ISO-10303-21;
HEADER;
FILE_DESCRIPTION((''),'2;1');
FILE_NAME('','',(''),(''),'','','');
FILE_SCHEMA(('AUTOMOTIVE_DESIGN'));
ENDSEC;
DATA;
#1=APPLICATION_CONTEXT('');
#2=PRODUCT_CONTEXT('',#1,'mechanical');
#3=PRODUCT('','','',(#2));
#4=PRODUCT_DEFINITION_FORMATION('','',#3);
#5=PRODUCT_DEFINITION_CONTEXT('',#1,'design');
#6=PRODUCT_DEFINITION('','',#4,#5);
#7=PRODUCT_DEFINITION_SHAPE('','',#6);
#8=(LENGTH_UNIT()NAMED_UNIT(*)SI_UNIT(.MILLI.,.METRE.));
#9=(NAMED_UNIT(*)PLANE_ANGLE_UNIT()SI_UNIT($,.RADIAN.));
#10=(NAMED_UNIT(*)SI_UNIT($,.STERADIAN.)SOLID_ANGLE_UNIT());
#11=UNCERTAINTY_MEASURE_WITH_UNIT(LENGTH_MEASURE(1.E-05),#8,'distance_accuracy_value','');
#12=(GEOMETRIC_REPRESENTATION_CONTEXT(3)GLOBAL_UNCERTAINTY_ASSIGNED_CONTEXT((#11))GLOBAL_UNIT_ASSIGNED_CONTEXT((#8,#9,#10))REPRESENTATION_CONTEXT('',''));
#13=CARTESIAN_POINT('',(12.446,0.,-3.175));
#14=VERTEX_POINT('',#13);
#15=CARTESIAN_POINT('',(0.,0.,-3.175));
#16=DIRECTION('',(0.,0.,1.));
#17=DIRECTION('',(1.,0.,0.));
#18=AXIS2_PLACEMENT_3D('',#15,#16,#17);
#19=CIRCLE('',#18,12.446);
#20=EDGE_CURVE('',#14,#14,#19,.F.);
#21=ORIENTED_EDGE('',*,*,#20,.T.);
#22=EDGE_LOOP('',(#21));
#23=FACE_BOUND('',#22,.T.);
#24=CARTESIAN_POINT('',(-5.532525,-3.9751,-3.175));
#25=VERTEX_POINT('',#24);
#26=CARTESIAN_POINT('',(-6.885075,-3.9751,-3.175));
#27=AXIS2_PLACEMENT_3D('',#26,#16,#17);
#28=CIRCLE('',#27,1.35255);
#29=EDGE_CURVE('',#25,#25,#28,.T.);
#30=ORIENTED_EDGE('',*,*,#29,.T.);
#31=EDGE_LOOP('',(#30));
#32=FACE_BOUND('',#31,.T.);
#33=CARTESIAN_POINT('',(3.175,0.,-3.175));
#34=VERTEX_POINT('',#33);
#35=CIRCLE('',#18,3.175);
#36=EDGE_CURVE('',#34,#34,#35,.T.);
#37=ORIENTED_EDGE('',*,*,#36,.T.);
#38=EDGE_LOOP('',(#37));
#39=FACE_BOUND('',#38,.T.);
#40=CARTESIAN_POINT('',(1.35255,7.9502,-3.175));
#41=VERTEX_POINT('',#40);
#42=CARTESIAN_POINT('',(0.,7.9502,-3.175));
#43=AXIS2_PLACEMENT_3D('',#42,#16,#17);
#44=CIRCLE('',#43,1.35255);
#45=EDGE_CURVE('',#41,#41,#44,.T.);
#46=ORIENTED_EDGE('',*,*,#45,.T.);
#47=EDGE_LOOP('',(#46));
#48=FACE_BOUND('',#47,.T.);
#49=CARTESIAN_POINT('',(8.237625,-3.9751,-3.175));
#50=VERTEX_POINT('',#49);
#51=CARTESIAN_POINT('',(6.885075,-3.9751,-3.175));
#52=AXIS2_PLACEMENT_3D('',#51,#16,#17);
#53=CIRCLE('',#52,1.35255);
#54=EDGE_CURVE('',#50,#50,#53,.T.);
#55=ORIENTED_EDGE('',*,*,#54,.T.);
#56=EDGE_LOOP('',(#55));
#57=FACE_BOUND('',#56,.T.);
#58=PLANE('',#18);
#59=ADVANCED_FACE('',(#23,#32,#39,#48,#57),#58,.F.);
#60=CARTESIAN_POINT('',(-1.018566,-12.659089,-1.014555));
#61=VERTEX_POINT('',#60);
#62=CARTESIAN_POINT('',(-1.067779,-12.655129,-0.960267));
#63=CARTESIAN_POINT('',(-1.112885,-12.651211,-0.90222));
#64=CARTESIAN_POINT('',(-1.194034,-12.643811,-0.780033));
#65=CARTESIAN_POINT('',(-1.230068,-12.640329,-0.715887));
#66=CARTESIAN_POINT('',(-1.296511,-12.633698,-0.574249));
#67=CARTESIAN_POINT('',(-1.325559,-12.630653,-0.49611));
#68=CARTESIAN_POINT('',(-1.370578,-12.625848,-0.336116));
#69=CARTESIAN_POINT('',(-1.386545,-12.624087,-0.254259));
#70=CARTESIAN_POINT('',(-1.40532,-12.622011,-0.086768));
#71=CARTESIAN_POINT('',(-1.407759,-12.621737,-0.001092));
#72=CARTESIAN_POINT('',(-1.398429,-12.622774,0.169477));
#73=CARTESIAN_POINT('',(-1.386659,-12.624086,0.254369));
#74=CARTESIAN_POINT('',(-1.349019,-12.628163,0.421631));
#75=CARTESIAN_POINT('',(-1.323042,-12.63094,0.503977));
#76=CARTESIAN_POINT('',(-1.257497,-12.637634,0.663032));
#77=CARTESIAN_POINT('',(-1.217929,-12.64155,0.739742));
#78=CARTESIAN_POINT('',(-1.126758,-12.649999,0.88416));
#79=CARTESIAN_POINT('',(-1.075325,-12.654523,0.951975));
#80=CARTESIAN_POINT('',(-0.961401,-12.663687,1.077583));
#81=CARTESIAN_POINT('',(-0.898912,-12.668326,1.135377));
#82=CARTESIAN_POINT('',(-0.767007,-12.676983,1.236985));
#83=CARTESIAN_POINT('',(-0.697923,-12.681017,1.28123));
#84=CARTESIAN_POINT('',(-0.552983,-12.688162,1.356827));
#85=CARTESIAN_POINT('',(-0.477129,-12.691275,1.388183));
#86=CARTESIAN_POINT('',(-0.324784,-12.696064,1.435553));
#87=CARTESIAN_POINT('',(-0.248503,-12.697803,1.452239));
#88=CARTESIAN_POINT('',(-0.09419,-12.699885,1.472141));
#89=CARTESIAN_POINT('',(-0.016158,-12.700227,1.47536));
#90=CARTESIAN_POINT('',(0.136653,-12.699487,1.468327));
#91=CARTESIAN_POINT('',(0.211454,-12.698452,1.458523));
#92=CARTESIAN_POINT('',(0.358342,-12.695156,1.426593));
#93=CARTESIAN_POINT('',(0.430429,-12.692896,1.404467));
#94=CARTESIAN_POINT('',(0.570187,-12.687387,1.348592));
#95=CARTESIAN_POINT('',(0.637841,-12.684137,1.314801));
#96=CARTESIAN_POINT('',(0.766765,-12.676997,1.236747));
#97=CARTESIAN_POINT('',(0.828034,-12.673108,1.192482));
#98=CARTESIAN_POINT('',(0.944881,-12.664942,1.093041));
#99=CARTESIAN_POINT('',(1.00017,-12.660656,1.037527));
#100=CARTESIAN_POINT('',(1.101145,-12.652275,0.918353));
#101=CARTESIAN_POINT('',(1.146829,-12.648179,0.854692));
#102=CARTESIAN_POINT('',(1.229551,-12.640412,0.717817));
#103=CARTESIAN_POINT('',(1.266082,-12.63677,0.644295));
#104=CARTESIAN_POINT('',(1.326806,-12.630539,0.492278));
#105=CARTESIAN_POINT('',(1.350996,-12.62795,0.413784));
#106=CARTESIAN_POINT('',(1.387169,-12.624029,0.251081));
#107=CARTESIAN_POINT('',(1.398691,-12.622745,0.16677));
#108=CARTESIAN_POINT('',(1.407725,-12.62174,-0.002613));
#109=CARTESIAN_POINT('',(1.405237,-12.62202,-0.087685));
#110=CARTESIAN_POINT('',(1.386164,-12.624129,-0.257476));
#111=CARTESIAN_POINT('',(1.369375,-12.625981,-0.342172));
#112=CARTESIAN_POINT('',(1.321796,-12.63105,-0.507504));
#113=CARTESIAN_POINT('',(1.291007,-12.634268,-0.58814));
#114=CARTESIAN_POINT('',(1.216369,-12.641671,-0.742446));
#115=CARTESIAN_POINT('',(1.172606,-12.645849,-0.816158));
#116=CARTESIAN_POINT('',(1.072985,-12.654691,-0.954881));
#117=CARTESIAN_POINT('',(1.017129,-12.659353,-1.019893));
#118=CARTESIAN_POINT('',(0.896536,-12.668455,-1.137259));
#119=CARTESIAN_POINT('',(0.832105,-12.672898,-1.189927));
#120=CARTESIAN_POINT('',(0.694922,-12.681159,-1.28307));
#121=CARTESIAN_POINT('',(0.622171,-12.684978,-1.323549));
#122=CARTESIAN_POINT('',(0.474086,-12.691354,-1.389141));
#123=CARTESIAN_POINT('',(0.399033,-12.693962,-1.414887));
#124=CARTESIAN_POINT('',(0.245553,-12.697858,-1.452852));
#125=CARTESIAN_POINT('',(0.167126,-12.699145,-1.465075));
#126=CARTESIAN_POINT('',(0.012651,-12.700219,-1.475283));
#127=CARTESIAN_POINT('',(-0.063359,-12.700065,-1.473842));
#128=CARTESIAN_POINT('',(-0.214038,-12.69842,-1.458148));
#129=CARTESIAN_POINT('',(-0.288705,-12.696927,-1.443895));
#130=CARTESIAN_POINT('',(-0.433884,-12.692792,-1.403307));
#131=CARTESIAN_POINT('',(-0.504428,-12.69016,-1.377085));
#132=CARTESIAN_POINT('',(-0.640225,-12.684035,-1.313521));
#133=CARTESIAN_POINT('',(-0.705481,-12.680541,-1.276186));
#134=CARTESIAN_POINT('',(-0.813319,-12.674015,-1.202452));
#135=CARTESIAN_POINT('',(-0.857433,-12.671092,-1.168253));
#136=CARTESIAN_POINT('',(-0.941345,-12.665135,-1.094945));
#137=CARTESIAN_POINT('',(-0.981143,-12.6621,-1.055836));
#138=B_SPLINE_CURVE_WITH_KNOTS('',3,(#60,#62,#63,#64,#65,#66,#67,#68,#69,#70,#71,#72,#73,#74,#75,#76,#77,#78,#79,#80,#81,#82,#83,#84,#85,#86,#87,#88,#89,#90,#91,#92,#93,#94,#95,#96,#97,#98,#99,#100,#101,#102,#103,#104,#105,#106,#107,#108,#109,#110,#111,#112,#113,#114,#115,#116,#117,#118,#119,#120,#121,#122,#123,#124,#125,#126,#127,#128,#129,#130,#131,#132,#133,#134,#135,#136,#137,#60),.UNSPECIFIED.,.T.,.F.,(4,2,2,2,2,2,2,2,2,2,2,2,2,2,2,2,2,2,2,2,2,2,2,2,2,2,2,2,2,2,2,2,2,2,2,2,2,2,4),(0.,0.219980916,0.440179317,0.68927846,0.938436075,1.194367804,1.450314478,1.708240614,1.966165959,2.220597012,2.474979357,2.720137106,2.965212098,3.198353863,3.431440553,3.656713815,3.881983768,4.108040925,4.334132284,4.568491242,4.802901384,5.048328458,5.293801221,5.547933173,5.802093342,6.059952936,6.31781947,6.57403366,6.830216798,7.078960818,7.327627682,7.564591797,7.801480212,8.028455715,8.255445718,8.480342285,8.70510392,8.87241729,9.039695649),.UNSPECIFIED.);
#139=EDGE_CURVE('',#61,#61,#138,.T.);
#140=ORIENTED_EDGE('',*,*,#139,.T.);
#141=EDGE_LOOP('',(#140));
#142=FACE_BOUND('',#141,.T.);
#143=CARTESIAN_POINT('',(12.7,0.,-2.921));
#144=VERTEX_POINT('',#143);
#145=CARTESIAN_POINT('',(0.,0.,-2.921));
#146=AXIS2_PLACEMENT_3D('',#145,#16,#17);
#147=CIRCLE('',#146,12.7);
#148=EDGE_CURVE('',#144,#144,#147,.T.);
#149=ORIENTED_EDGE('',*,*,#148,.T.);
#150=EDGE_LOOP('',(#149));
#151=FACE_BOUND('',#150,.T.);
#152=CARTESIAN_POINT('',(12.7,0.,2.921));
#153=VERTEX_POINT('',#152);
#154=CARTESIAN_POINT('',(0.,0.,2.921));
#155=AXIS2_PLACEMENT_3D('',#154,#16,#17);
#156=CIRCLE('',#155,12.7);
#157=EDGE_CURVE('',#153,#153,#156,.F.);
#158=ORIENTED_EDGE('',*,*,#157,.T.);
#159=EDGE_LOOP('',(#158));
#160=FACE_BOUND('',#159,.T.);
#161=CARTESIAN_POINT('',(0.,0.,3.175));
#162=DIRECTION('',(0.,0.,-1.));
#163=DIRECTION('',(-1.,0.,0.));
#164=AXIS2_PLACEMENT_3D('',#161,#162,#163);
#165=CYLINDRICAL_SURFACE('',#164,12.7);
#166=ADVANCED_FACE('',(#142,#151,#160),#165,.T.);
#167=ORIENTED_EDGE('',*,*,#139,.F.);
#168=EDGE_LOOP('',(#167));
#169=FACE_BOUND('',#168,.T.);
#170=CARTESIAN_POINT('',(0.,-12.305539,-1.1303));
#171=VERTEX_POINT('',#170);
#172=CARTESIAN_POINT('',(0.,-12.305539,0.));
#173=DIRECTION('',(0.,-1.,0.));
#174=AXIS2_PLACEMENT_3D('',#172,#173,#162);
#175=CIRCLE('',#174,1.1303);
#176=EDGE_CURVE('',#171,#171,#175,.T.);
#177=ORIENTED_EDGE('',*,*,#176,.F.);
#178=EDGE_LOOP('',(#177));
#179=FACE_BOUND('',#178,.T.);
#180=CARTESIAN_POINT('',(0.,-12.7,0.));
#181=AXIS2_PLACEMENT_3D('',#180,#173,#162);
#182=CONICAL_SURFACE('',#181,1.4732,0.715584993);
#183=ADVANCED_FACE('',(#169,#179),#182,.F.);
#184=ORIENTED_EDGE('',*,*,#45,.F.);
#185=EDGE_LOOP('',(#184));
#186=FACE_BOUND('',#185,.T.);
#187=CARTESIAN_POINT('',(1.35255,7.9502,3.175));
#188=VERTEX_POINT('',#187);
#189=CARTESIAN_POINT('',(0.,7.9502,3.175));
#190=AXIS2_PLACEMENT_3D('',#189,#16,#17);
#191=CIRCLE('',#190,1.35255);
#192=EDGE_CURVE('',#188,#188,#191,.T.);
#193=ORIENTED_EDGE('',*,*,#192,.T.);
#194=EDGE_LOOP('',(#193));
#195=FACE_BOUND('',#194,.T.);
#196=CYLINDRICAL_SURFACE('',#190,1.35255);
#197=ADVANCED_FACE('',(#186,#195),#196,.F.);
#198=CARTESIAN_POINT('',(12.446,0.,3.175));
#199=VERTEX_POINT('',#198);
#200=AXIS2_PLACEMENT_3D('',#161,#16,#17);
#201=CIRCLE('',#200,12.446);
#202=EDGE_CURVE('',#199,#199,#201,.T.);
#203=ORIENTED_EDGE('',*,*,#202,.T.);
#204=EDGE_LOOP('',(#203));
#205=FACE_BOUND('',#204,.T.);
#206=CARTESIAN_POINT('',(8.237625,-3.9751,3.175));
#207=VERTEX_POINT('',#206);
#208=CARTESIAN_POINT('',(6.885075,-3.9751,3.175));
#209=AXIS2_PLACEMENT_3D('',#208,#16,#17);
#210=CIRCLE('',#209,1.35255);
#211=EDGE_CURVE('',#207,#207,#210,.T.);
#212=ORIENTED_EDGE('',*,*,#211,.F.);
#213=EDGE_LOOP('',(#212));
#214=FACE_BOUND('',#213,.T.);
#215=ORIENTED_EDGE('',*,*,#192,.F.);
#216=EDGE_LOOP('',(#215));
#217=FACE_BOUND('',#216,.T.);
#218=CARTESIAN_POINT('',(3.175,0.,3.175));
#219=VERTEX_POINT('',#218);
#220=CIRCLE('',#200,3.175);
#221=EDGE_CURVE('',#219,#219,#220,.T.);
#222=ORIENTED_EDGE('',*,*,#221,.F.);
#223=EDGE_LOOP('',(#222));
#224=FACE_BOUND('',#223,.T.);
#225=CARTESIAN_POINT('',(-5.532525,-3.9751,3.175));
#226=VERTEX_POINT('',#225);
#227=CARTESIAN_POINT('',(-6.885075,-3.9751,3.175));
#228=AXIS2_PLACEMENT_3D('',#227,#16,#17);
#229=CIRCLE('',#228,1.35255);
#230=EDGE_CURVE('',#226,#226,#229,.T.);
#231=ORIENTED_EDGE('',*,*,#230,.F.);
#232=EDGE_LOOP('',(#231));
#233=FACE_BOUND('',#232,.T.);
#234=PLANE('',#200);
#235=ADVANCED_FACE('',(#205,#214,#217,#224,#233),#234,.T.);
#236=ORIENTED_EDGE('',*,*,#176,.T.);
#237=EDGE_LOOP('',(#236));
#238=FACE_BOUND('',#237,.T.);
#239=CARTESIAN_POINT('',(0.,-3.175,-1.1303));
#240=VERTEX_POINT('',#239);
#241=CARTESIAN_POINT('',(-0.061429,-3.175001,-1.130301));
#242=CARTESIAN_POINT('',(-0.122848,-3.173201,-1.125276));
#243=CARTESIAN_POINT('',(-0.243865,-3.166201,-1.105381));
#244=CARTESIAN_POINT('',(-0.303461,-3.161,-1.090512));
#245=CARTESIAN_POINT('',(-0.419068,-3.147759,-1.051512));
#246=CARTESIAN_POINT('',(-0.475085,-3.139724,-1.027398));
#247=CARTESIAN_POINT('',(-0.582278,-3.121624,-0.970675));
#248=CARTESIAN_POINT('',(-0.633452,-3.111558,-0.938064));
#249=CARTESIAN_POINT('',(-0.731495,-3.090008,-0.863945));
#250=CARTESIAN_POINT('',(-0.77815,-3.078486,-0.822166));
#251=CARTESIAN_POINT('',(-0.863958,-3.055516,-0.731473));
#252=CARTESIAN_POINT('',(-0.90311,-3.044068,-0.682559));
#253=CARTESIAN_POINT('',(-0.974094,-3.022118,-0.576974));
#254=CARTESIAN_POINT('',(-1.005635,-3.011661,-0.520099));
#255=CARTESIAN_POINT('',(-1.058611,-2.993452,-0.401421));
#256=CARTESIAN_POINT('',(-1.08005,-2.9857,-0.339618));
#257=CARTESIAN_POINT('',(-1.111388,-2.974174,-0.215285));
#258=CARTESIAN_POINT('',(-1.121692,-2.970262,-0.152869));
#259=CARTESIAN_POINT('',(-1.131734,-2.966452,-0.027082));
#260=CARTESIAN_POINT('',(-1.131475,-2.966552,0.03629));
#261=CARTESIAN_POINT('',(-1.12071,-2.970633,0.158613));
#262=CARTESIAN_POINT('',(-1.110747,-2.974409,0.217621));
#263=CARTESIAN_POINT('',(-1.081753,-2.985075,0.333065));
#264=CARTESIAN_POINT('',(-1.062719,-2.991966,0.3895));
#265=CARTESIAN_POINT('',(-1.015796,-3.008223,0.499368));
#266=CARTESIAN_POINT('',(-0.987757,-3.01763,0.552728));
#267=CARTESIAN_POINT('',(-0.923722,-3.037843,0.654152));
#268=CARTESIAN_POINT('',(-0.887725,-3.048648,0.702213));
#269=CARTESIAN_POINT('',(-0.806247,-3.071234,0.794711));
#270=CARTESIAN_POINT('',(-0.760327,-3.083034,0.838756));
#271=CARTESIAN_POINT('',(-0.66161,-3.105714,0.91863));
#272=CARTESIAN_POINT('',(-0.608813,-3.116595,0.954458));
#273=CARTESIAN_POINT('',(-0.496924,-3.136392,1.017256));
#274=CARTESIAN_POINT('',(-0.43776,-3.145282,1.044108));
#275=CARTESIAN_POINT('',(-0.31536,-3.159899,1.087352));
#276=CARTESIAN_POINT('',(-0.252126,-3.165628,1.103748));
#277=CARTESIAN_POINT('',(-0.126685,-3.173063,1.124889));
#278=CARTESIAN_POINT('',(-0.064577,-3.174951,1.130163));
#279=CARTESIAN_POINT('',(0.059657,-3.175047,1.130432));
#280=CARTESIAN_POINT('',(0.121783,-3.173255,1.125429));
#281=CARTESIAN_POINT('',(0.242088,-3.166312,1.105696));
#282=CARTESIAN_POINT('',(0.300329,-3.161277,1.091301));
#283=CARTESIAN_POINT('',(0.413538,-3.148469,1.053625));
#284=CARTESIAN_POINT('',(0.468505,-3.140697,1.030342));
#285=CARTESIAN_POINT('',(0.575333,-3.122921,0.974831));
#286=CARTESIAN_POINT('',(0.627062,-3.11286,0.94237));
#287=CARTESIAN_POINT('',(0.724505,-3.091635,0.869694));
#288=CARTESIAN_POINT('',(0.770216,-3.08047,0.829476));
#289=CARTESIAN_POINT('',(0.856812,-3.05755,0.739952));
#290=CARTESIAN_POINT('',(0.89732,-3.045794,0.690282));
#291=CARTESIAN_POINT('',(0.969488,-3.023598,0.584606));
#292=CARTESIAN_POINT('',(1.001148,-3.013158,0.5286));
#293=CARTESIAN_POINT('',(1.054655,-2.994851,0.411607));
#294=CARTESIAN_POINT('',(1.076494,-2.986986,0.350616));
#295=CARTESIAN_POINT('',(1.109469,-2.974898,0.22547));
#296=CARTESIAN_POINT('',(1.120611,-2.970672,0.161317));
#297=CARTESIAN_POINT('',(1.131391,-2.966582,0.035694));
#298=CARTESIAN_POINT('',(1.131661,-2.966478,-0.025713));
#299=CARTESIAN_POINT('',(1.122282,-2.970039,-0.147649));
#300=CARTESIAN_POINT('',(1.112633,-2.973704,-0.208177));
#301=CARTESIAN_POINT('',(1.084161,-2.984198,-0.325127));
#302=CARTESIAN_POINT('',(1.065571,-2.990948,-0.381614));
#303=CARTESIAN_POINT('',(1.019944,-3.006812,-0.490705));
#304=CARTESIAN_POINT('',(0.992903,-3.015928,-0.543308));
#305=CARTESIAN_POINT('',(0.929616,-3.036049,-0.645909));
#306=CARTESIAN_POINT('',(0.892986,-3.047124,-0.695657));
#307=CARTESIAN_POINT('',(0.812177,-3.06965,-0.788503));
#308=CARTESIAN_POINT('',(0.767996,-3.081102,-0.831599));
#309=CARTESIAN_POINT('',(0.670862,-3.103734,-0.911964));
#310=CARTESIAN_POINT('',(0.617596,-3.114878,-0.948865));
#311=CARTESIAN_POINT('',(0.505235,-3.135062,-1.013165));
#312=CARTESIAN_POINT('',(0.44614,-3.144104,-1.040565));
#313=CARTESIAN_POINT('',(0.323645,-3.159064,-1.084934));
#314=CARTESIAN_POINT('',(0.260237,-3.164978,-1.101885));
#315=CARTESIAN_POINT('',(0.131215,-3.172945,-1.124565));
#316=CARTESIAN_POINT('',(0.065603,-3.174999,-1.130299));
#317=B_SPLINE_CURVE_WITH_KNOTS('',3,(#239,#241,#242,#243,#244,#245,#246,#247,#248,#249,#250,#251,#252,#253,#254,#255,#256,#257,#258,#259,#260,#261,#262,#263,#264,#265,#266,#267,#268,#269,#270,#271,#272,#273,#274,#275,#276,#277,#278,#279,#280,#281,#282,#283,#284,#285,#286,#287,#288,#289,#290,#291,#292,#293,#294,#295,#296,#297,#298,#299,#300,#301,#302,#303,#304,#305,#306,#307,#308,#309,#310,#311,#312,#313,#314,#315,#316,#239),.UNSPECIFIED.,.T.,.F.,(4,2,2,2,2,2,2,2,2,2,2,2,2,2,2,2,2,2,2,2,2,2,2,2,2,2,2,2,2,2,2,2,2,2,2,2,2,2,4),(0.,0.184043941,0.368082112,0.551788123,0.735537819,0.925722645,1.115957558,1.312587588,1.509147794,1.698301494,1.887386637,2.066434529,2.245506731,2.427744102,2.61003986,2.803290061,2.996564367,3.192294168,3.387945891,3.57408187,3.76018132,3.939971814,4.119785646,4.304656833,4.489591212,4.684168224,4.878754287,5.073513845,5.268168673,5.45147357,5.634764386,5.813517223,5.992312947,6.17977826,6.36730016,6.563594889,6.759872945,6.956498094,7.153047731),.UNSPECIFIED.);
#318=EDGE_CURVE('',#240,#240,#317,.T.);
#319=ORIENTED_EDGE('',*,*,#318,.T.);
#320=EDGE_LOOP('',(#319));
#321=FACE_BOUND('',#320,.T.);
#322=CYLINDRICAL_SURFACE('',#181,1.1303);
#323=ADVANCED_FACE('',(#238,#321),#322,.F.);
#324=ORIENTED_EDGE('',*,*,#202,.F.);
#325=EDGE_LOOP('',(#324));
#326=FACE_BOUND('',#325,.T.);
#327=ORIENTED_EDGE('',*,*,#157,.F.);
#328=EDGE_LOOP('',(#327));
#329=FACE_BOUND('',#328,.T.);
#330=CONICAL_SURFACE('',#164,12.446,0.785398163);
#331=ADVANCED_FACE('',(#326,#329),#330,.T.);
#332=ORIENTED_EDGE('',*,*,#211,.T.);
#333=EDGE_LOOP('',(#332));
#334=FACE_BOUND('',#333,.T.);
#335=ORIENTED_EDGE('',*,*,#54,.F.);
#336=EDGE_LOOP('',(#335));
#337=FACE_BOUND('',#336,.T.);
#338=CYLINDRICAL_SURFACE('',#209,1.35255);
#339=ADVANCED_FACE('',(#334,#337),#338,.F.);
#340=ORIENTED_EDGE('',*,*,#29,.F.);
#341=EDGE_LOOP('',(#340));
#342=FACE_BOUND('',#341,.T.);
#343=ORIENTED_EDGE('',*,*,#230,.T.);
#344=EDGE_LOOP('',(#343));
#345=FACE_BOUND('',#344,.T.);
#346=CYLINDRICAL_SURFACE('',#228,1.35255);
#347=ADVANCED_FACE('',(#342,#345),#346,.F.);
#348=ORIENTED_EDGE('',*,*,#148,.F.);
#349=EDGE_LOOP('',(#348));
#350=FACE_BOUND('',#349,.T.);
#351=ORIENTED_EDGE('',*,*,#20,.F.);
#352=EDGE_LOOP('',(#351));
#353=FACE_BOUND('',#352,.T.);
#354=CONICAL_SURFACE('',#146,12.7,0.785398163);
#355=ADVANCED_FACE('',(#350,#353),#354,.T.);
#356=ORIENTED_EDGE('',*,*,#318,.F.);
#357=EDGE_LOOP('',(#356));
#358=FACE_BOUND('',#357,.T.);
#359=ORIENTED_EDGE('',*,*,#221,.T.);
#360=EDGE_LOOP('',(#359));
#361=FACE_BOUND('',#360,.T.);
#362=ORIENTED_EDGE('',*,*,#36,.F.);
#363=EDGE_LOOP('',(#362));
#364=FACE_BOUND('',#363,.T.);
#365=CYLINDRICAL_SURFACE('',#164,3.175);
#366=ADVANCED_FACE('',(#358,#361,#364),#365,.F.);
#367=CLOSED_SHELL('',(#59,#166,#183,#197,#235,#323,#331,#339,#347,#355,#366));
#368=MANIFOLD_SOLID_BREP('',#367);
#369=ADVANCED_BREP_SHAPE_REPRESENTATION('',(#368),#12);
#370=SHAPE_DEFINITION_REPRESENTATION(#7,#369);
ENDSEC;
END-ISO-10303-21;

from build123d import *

# Parameters (mm, degrees)
SKETCH2_R             = 12.7
SKETCH2_R_2           = 3.175
BOSS_EXTRUDE1_DEPTH   = 3.175
CHAMFER1_SIZE         = 0.254
F_6_32_TAPPED_HOLE1_D = 2.7051


# Read off the part's stored shape, not the designer's step: #4-40 Tapped Hole2
with BuildPart() as part:
    # Sketch2 → Boss-Extrude1 (new, symmetric)
    with BuildSketch(Plane.XY):
        Circle(SKETCH2_R)
        Circle(SKETCH2_R_2, mode=Mode.SUBTRACT)
    extrude(amount=BOSS_EXTRUDE1_DEPTH, both=True)

    # Chamfer1
    chamfer1_edges = [part.edges().sort_by_distance(p)[0] for p in [
        (-12.7, 0, -3.175),
        (-12.7, 0, 3.175),
    ]]
    chamfer(chamfer1_edges, length=CHAMFER1_SIZE)

    # #6-32 Tapped Hole1 (through all)
    with Locations(Plane.XY.offset(3.175)):
        with Locations((0, 7.9502), (6.885075165, -3.9751), (-6.885075165, -3.9751)):
            Hole(F_6_32_TAPPED_HOLE1_D / 2)

    # #4-40 Tapped Hole2 outline → #4-40 Tapped Hole2 (revolve, cut)
    with BuildSketch(Plane.XY):
        Polygon((0, -12.700018831), (1.473216369, -12.700018831), (1.1303, -12.305538673), (1.1303, -2.966966147), (0, -2.966966147), align=None)
    revolve(axis=Axis((0, 0, 0), (0, 1, 0)), mode=Mode.SUBTRACT)


solid = part.part
